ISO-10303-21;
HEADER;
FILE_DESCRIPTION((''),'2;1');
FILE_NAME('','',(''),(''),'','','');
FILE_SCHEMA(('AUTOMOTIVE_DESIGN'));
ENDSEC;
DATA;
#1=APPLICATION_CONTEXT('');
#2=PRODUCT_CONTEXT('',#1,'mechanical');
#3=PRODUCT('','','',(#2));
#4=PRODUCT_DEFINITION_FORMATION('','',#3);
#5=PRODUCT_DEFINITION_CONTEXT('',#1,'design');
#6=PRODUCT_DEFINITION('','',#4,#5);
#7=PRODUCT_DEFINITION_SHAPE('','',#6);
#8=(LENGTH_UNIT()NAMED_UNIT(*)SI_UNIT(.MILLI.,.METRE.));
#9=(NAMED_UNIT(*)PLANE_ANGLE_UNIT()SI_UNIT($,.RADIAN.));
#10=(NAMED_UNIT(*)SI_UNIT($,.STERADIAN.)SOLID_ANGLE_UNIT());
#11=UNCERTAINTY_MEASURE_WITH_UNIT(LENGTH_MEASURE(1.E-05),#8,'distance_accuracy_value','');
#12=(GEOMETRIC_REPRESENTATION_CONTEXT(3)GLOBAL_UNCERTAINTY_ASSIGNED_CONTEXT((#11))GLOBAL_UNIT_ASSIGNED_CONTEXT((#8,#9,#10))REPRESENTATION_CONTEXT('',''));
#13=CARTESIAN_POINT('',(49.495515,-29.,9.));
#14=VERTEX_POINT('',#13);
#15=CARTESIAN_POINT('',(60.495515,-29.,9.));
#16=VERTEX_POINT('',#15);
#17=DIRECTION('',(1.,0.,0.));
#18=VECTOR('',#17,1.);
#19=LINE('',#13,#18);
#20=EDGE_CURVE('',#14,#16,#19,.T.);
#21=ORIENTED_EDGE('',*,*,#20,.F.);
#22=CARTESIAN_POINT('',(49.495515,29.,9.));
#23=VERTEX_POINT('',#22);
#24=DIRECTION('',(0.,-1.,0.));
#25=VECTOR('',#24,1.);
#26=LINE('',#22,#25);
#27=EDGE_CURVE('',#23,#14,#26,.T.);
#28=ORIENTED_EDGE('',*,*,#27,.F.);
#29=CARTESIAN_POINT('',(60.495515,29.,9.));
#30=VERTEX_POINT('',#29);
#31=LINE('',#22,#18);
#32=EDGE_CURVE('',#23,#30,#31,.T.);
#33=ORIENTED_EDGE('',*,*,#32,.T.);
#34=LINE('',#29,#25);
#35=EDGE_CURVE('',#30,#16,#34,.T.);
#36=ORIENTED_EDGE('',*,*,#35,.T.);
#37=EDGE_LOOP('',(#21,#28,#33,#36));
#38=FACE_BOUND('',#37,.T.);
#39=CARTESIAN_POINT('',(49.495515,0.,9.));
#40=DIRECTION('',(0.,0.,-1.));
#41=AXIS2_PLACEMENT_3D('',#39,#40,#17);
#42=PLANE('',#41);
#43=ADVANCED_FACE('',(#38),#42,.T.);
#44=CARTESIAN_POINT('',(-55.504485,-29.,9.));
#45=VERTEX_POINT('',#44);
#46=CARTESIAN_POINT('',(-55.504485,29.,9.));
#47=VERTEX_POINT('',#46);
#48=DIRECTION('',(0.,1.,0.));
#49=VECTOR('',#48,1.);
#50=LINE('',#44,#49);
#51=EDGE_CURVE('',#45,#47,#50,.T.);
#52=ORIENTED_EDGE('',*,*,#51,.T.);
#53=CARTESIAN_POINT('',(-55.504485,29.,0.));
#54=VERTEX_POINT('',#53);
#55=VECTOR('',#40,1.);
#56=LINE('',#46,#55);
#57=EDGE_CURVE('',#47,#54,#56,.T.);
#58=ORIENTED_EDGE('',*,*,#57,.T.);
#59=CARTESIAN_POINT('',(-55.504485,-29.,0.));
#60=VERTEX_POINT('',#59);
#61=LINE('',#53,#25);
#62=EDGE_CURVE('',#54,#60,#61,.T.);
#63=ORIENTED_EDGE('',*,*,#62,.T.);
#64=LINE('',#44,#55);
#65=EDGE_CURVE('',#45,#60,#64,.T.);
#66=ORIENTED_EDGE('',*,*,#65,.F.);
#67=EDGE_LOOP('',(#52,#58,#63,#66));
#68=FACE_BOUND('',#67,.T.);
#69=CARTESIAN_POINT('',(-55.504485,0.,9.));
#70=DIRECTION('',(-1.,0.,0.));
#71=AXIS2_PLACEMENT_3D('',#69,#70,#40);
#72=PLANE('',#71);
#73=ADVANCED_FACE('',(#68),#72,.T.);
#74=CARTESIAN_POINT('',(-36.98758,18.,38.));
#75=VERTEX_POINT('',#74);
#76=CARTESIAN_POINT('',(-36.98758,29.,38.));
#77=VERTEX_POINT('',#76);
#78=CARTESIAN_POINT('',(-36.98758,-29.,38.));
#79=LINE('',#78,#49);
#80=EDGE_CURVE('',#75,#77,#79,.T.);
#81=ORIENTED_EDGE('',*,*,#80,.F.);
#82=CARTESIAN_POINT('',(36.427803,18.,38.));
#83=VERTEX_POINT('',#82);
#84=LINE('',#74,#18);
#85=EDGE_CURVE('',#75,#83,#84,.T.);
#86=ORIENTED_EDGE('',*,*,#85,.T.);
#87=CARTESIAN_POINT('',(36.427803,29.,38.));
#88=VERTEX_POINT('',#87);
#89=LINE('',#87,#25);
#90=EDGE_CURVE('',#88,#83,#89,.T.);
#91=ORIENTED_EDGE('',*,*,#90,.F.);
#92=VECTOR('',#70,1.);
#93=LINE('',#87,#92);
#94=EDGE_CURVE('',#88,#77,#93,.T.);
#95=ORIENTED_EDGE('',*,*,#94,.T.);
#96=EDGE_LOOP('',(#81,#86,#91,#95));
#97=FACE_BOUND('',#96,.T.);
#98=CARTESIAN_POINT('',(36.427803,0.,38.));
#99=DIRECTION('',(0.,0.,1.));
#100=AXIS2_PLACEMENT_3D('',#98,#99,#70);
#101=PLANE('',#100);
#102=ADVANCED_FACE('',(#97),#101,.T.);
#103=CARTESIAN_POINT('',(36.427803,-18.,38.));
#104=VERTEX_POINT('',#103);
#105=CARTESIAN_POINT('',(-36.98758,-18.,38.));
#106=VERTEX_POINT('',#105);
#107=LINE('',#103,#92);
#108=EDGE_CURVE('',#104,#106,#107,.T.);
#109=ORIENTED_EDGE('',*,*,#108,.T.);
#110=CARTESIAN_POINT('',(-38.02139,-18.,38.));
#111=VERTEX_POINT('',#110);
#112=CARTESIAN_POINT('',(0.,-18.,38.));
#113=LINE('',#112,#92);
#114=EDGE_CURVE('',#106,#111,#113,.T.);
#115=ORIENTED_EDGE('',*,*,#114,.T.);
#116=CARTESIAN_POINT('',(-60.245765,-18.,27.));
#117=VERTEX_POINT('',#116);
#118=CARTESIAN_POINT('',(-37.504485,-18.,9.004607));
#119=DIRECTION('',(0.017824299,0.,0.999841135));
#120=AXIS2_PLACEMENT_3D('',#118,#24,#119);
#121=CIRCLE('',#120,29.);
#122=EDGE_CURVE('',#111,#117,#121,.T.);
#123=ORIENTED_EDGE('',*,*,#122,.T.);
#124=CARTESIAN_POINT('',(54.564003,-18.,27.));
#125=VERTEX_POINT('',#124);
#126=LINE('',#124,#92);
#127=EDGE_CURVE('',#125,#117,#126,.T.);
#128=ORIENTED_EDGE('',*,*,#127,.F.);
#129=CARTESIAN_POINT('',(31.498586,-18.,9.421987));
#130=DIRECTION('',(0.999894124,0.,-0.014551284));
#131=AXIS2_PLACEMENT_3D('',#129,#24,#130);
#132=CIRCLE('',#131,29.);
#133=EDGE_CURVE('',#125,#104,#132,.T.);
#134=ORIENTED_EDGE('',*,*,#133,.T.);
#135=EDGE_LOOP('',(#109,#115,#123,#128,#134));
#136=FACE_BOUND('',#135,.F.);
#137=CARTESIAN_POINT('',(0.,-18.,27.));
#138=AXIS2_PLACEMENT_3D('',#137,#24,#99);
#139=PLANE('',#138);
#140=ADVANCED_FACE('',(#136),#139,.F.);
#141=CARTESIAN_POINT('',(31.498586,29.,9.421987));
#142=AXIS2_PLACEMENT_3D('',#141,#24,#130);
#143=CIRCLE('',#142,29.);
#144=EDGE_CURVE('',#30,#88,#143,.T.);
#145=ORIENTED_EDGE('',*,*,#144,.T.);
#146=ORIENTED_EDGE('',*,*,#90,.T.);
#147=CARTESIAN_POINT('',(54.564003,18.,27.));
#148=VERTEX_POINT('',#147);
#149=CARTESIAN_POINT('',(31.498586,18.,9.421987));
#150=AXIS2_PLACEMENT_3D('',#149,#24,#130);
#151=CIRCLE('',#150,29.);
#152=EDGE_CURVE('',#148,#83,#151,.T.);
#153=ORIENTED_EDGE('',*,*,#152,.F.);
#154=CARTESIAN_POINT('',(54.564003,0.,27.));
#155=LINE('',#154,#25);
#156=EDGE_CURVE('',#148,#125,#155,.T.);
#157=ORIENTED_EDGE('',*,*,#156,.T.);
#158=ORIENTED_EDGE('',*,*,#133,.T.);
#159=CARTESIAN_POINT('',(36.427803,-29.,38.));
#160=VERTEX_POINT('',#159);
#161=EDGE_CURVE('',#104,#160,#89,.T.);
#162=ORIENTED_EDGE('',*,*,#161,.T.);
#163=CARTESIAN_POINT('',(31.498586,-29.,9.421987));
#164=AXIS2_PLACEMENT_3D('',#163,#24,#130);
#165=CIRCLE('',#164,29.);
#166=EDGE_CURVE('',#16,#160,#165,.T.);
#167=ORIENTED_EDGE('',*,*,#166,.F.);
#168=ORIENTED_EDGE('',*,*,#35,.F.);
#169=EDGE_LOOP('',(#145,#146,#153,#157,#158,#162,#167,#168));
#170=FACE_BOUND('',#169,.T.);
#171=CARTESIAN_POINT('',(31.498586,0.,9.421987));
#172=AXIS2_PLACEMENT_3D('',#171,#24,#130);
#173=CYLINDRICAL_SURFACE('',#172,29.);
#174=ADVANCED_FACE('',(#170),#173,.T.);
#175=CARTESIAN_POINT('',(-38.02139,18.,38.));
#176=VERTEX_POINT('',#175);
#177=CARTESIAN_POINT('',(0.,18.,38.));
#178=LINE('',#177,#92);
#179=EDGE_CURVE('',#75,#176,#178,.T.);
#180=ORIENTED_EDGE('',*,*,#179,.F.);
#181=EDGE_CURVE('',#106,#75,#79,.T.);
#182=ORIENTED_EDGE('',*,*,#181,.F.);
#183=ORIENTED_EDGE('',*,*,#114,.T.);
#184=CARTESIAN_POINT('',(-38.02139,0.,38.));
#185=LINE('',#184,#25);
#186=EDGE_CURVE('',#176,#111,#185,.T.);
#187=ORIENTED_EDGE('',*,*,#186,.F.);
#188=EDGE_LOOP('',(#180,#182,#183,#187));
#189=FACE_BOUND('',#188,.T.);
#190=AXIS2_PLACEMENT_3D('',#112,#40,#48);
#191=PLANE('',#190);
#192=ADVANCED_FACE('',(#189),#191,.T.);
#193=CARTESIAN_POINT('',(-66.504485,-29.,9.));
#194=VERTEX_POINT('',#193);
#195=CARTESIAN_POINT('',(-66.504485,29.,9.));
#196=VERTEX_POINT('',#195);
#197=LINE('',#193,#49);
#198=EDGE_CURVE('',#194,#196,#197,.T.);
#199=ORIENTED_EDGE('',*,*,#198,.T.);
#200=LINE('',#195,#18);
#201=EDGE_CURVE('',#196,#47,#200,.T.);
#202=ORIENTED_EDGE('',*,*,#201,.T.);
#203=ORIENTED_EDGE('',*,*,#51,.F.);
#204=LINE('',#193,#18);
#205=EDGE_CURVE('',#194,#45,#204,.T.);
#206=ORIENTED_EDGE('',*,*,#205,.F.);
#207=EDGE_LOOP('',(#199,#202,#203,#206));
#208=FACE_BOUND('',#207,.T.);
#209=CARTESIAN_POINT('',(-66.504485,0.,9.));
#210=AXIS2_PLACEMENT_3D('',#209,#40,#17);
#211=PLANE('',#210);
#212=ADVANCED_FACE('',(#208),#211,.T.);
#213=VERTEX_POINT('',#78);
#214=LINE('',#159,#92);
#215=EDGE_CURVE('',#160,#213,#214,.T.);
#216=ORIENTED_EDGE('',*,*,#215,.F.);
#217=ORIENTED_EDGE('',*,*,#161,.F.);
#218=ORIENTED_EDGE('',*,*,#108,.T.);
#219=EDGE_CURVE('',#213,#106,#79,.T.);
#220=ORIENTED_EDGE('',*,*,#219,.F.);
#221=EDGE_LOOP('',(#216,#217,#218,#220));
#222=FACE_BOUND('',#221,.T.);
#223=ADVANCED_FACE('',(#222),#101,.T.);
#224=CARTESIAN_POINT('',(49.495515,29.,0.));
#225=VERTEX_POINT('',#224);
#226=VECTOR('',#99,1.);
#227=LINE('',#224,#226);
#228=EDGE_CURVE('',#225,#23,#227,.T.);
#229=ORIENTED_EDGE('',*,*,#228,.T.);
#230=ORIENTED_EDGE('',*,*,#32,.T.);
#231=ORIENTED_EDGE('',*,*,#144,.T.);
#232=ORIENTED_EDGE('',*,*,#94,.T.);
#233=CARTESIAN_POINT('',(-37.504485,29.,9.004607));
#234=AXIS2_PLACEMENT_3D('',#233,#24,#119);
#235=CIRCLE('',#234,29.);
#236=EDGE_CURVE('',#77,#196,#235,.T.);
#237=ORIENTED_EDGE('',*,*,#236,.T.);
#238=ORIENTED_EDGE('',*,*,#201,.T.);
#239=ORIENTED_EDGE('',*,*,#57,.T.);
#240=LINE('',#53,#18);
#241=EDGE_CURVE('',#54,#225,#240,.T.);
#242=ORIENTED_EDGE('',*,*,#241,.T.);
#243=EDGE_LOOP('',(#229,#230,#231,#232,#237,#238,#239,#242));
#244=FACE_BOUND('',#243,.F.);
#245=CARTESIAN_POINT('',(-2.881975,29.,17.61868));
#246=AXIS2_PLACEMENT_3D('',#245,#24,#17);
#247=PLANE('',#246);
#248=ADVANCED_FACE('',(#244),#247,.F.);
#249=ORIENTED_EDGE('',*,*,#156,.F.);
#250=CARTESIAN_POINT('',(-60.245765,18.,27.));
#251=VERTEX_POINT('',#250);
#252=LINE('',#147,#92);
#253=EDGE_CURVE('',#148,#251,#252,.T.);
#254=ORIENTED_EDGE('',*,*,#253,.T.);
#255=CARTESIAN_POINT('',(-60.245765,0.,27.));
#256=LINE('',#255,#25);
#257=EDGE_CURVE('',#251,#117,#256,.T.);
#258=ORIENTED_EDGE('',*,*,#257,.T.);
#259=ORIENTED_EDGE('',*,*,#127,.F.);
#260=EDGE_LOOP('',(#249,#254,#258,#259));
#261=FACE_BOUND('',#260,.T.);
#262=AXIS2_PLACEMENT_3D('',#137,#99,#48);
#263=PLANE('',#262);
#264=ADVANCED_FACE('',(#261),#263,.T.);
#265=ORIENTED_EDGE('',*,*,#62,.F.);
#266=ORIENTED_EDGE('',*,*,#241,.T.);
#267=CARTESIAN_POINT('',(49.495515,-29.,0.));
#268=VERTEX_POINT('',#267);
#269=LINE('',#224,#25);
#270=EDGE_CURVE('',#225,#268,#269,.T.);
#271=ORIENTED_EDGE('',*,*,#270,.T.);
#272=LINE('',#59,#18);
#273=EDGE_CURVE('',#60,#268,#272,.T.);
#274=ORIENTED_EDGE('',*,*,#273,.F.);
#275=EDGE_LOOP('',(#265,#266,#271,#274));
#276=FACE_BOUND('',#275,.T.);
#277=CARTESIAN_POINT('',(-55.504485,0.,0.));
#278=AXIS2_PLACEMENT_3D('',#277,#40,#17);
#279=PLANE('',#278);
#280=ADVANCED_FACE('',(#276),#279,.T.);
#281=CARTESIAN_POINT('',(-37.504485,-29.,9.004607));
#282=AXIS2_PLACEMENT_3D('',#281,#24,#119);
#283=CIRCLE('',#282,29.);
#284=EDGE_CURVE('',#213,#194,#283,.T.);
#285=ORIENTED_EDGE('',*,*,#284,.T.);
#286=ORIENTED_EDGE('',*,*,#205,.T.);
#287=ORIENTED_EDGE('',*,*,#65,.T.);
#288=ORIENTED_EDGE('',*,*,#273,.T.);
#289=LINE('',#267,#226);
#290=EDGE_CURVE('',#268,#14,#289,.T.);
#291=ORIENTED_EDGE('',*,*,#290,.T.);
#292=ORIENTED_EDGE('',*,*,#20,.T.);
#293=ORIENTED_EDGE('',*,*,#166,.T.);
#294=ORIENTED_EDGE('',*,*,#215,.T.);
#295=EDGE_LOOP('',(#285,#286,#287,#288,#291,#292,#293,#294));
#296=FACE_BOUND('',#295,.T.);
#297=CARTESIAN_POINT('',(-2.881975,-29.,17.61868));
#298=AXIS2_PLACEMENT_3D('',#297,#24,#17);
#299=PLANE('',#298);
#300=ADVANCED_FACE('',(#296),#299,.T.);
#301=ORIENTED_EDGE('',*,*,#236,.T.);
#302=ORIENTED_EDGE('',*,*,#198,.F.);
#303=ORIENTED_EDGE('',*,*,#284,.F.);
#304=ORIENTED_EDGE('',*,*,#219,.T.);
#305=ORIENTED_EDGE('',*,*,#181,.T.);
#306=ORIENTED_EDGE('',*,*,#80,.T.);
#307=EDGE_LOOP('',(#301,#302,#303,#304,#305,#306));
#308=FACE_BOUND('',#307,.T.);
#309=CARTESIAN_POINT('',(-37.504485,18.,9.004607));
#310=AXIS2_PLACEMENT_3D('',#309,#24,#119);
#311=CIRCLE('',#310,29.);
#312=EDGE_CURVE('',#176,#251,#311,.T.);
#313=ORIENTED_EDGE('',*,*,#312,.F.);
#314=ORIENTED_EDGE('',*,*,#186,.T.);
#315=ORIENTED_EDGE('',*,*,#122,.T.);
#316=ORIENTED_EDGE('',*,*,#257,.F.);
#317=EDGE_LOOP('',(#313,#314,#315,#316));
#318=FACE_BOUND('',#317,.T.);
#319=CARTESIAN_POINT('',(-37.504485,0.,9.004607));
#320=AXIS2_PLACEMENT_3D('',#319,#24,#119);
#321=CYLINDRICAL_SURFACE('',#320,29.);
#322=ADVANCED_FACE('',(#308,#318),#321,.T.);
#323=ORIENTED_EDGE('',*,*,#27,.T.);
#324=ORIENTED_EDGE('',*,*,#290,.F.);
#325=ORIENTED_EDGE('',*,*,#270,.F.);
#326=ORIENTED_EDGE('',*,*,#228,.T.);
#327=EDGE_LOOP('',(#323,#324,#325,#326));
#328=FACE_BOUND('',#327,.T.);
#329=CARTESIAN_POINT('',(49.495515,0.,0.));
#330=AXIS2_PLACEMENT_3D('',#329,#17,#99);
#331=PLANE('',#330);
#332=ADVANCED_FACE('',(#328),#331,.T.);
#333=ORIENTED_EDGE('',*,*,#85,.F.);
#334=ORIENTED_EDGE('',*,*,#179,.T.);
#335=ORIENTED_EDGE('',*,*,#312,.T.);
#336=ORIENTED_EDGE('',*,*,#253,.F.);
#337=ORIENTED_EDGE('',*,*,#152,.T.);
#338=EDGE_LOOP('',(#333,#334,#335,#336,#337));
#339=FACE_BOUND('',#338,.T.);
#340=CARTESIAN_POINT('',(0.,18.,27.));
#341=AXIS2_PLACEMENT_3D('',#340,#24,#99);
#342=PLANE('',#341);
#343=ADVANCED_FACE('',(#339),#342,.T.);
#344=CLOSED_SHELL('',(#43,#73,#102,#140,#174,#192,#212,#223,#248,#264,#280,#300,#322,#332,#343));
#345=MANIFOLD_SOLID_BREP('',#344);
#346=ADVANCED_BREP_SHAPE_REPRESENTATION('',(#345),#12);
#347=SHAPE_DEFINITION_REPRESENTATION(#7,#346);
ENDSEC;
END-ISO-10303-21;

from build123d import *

# Parameters (mm, degrees)
F1_DEPTH      = 29
F2_W          = 36
F2_H          = 11
F3_DEPTH      = 66.5054850399
F3_DEPTH_BACK = 60.4995857167


with BuildPart() as f1:
    # F0 (on Front) → F1 (new body, symmetric)
    with BuildSketch(Plane.XZ):
        with BuildLine():
            Line((-55.504484674, 9), (-55.504484674, 0))
            Line((-55.504484674, 0), (49.495515326, 0))
            Line((49.495515326, 0), (49.495515326, 9))
            Line((49.495515326, 9), (60.495515326, 9))
            ThreePointArc((60.495515326, 9), (53.8144067162, 27.9423579991), (36.4278033617, 38))
            Line((36.4278033617, 38), (-36.987580359, 38))
            ThreePointArc((-36.987580359, 38), (-57.8286498328, 29.6910356314), (-66.504484674, 9))
            Line((-66.504484674, 9), (-55.504484674, 9))
        make_face()
    extrude(amount=F1_DEPTH, both=True)

    # F2 (on Right) → F3 (cut, two sides)
    with BuildSketch(Plane.YZ) as f3_sk:
        with Locations((0, 32.5)):
            Rectangle(F2_W, F2_H)
    extrude(amount=-F3_DEPTH, mode=Mode.SUBTRACT)
    extrude(f3_sk.sketch, amount=F3_DEPTH_BACK, mode=Mode.SUBTRACT)


solid = f1.part
